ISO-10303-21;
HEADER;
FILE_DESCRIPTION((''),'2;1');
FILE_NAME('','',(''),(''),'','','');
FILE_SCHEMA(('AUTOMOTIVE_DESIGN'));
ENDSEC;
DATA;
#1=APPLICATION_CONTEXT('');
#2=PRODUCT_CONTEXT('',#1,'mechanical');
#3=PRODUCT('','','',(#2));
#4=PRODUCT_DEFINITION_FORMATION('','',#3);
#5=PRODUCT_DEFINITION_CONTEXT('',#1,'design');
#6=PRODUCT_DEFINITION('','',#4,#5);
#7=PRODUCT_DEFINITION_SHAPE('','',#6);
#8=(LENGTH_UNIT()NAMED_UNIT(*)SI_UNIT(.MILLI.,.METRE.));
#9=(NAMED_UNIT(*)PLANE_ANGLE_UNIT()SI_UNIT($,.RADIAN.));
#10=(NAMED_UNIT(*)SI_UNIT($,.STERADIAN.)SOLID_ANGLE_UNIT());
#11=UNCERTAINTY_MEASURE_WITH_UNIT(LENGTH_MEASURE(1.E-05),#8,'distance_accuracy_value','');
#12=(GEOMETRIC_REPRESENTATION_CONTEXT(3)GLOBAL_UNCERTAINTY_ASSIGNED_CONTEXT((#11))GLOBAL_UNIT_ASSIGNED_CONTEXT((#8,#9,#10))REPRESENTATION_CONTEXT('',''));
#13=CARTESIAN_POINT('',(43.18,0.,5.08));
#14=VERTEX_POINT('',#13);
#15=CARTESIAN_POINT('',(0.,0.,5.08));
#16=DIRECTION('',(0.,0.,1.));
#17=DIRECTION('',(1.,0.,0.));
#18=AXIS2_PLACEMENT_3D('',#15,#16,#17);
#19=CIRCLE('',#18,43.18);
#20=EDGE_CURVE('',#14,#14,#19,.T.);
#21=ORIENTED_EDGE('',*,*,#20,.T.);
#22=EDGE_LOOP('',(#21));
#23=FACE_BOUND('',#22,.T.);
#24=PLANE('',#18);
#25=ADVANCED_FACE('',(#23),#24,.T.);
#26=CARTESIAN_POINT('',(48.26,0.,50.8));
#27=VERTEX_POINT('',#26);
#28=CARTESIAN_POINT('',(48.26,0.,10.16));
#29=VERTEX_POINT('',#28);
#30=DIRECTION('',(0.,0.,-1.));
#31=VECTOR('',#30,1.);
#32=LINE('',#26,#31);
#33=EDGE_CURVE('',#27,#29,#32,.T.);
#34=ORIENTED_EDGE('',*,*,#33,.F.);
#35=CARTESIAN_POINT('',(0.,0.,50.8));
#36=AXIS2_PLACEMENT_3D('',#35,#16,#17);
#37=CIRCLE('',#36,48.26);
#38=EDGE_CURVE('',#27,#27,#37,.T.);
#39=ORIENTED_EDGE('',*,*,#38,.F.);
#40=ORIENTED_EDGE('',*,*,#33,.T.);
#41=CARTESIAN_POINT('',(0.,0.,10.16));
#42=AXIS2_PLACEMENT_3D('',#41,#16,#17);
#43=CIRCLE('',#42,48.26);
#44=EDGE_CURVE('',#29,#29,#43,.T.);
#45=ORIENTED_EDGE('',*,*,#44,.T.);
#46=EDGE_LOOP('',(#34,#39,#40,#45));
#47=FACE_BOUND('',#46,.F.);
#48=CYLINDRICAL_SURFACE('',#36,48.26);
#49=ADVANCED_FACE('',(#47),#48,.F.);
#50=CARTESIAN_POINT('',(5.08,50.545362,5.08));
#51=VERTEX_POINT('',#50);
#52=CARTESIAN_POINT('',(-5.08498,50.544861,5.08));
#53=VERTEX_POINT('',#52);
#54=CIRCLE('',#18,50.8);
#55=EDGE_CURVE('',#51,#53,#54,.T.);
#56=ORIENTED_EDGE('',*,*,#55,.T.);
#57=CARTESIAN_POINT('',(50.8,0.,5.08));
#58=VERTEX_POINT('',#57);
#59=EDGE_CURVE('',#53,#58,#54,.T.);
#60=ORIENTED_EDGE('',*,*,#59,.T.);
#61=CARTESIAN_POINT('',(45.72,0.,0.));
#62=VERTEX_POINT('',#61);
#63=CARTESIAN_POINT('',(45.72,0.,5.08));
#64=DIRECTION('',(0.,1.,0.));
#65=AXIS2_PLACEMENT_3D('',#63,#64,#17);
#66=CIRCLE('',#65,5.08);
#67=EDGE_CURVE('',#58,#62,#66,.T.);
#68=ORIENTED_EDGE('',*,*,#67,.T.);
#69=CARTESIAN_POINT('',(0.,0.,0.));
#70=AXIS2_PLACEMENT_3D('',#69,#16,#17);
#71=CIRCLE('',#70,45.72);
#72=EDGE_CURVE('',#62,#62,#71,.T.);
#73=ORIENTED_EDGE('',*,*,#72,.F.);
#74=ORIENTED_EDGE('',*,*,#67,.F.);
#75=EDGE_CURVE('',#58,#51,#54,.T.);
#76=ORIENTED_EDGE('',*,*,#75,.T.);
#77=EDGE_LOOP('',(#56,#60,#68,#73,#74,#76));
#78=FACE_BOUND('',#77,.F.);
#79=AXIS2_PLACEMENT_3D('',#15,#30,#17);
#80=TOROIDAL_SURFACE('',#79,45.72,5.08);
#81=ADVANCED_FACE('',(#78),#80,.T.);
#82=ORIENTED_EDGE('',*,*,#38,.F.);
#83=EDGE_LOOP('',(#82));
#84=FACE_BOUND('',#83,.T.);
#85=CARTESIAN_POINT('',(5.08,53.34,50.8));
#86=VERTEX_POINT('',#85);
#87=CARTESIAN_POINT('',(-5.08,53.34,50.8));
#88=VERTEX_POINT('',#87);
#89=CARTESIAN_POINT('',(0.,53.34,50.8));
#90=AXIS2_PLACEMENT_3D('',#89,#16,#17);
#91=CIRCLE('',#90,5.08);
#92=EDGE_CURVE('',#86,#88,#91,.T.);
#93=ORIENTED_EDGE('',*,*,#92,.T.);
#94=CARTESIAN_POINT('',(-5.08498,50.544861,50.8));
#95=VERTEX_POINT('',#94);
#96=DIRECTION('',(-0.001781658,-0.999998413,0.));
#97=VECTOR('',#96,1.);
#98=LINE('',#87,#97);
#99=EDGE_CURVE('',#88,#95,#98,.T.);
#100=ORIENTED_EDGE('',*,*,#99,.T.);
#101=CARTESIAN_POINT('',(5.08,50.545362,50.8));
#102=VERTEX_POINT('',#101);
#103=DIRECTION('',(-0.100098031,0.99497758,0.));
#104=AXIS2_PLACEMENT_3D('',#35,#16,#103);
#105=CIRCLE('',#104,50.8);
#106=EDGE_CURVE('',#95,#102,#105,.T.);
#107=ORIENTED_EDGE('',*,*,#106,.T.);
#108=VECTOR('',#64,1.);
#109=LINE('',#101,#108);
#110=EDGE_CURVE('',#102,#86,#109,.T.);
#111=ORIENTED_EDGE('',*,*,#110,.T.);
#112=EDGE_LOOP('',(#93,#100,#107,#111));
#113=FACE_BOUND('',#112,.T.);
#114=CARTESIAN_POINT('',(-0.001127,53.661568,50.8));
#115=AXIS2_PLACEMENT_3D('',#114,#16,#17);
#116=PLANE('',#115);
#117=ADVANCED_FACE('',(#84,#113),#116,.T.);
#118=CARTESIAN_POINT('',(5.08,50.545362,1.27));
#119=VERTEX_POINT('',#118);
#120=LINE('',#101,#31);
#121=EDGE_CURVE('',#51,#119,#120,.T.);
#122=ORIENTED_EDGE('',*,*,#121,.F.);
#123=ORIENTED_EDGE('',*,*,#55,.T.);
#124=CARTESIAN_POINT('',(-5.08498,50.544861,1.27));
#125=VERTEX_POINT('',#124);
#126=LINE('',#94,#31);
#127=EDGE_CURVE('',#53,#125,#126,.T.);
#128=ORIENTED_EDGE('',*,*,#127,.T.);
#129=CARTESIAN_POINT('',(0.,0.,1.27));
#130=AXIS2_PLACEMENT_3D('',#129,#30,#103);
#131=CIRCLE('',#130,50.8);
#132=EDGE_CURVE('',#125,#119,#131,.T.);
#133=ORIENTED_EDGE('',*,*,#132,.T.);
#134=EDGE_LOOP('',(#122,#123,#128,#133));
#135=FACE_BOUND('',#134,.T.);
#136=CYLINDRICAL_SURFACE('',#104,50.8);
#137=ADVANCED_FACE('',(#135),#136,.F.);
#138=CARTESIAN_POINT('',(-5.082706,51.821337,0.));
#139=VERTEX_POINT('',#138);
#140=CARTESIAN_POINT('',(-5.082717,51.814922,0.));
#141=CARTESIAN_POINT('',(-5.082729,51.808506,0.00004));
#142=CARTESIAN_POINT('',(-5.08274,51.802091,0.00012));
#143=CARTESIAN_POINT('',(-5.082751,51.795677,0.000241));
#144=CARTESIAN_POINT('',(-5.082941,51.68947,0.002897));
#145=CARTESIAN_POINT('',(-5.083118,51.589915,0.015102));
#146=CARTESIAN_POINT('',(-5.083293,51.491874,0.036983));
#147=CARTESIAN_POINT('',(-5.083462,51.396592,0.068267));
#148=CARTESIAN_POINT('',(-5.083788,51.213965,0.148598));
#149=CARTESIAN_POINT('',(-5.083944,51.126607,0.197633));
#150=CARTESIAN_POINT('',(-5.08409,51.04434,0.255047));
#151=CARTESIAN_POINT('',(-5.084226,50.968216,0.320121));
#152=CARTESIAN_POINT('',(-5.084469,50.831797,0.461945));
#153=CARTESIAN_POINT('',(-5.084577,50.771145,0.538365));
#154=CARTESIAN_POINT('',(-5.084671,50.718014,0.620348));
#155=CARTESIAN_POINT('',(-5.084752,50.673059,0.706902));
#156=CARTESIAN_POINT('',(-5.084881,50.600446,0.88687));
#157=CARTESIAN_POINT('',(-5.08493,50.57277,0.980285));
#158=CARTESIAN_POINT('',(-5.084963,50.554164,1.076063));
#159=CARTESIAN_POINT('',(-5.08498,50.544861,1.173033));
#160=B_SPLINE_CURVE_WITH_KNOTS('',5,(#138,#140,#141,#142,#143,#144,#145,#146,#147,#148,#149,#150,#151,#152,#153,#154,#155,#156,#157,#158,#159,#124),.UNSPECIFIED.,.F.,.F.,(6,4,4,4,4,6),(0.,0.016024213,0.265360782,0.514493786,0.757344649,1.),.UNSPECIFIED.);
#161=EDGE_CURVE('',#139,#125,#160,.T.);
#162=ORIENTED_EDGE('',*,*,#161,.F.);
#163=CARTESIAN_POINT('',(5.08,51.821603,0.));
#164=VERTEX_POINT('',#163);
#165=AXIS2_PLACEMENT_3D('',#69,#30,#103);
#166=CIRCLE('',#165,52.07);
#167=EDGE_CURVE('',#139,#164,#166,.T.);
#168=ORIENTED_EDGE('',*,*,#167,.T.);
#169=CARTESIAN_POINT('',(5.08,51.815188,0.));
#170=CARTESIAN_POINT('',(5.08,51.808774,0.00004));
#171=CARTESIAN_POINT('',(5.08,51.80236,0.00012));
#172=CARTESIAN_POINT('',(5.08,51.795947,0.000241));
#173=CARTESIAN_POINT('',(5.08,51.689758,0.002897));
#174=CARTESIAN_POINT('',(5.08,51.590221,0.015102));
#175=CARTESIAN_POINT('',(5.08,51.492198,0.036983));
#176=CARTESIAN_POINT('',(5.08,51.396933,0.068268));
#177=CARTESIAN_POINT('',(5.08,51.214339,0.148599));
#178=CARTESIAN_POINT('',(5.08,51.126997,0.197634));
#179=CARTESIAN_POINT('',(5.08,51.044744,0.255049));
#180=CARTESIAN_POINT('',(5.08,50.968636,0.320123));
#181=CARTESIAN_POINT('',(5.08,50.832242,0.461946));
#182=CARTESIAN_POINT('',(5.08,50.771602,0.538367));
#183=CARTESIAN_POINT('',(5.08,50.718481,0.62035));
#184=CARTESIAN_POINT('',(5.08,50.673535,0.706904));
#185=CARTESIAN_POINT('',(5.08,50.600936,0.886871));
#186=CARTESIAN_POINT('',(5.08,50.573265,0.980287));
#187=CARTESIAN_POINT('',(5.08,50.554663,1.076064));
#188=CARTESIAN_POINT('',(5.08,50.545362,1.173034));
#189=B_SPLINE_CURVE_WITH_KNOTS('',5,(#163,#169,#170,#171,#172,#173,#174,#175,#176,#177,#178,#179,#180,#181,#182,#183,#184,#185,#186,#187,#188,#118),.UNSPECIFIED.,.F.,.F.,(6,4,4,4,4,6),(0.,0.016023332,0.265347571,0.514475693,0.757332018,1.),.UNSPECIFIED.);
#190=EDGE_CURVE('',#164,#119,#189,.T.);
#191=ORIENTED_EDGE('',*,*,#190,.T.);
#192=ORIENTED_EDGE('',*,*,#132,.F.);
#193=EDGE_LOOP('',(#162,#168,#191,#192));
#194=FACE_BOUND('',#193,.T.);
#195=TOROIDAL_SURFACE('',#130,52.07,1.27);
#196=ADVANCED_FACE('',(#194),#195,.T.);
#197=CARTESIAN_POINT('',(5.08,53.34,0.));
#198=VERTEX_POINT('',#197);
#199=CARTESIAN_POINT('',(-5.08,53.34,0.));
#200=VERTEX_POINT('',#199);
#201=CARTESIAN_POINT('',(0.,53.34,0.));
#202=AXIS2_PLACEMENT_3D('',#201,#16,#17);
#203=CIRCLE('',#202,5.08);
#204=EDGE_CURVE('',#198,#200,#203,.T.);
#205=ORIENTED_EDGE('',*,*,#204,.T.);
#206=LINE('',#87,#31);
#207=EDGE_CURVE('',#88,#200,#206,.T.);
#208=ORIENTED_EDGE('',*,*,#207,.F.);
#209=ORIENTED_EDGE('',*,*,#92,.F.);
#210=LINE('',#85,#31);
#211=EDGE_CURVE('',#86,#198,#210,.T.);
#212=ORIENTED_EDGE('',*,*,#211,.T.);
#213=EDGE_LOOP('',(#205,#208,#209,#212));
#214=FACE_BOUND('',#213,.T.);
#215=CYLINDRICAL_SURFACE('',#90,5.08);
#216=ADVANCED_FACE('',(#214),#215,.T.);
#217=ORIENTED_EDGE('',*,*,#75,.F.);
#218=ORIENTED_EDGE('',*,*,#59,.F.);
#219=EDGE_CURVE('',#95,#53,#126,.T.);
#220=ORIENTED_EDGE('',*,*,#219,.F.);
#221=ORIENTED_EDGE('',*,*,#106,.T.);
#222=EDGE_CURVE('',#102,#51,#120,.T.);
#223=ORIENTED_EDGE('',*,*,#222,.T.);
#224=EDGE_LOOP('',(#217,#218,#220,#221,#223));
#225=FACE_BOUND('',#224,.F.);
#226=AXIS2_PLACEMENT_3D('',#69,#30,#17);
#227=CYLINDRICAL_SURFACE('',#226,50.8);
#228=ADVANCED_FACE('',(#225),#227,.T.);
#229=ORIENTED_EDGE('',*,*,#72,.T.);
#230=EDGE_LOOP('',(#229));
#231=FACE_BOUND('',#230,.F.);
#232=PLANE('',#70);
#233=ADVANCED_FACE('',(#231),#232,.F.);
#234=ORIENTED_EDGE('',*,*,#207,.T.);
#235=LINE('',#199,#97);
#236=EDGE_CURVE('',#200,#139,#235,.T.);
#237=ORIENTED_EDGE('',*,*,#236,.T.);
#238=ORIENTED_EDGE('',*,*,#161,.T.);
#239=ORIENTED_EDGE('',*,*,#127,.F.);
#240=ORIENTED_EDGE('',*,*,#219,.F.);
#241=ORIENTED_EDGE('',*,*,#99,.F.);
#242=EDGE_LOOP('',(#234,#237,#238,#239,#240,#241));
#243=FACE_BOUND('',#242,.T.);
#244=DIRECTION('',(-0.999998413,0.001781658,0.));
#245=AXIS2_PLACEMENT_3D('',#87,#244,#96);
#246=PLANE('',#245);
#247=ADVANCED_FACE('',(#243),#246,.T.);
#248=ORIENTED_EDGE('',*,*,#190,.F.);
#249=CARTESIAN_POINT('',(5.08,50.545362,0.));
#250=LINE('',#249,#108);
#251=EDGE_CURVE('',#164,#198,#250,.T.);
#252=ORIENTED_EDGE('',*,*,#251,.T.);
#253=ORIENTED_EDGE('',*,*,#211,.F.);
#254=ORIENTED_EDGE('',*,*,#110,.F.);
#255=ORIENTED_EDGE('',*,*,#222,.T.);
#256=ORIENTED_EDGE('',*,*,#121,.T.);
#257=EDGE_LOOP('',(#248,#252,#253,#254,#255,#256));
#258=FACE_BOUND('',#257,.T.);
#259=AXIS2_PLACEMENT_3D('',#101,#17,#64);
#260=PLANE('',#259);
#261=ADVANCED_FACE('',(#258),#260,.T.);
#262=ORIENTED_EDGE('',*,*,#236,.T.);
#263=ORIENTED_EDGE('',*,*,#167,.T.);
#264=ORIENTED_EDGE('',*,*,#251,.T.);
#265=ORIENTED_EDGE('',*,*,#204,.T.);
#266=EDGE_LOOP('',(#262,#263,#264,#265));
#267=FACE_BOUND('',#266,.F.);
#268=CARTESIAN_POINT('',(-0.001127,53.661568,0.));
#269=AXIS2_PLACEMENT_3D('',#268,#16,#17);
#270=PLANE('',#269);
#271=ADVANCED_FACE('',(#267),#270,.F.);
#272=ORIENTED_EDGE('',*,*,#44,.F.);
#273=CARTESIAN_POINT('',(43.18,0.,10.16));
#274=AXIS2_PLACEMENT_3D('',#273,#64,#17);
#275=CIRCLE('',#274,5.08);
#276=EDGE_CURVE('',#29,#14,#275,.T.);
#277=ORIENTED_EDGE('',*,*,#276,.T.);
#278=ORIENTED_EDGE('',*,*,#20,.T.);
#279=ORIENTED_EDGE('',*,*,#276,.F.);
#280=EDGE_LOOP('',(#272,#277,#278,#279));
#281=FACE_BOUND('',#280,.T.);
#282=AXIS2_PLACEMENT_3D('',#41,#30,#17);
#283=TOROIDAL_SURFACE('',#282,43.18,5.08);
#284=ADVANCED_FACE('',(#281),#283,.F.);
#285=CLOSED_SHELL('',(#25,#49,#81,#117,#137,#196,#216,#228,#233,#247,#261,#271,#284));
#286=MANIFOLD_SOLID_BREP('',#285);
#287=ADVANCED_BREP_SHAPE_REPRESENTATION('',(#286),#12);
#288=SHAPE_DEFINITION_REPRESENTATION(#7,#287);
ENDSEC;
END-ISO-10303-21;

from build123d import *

# Parameters (mm, degrees)
F0_R     = 50.8
F1_DEPTH = 50.8
F2_R     = 48.26
F3_DEPTH = 45.72
F4_R     = 5.08
F5_R     = 5.08
F7_DEPTH = 50.8
F8_R     = 1.27


# Not quite as in the source:
# - the program builds the solid bodies; features that only make, move or delete a surface that nothing else refers to are left out


with BuildPart() as f1:
    # F0 (on Top) → F1 (new body)
    with BuildSketch(Plane.XY):
        Circle(F0_R)
    extrude(amount=F1_DEPTH)

    # F2 (on face) → F3 (cut)
    with BuildSketch(Plane.XY.offset(50.8)):
        Circle(F2_R)
    extrude(amount=-F3_DEPTH, mode=Mode.SUBTRACT)

    # F4
    f4_edges = [f1.edges().sort_by_distance(p)[0] for p in [
        (-48.26, 0, 5.08),
    ]]
    fillet(f4_edges, radius=F4_R)

    # F5
    f5_edges = [f1.edges().sort_by_distance(p)[0] for p in [
        (-50.8, 0, 0),
    ]]
    fillet(f5_edges, radius=F5_R)

    # F6 (on face) → F7 (join)
    with BuildSketch(Plane.XY.offset(50.8)):
        with BuildLine():
            ThreePointArc((5.08, 53.34), (0, 58.42), (-5.08, 53.34))
            Line((-5.08, 53.34), (-5.0849799889, 50.5448610495))
            ThreePointArc((-5.0849799889, 50.5448610495), (-0.002502551, 50.7999999384), (5.08, 50.545361805))
            Line((5.08, 50.545361805), (5.08, 50.8))
            Line((5.08, 50.8), (5.08, 53.34))
        make_face()
    extrude(amount=-F7_DEPTH)

    # F8
    f8_edges = [f1.edges().sort_by_distance(p)[0] for p in [
        (-0.002503, 50.8, 0),
    ]]
    fillet(f8_edges, radius=F8_R)


solid = f1.part
